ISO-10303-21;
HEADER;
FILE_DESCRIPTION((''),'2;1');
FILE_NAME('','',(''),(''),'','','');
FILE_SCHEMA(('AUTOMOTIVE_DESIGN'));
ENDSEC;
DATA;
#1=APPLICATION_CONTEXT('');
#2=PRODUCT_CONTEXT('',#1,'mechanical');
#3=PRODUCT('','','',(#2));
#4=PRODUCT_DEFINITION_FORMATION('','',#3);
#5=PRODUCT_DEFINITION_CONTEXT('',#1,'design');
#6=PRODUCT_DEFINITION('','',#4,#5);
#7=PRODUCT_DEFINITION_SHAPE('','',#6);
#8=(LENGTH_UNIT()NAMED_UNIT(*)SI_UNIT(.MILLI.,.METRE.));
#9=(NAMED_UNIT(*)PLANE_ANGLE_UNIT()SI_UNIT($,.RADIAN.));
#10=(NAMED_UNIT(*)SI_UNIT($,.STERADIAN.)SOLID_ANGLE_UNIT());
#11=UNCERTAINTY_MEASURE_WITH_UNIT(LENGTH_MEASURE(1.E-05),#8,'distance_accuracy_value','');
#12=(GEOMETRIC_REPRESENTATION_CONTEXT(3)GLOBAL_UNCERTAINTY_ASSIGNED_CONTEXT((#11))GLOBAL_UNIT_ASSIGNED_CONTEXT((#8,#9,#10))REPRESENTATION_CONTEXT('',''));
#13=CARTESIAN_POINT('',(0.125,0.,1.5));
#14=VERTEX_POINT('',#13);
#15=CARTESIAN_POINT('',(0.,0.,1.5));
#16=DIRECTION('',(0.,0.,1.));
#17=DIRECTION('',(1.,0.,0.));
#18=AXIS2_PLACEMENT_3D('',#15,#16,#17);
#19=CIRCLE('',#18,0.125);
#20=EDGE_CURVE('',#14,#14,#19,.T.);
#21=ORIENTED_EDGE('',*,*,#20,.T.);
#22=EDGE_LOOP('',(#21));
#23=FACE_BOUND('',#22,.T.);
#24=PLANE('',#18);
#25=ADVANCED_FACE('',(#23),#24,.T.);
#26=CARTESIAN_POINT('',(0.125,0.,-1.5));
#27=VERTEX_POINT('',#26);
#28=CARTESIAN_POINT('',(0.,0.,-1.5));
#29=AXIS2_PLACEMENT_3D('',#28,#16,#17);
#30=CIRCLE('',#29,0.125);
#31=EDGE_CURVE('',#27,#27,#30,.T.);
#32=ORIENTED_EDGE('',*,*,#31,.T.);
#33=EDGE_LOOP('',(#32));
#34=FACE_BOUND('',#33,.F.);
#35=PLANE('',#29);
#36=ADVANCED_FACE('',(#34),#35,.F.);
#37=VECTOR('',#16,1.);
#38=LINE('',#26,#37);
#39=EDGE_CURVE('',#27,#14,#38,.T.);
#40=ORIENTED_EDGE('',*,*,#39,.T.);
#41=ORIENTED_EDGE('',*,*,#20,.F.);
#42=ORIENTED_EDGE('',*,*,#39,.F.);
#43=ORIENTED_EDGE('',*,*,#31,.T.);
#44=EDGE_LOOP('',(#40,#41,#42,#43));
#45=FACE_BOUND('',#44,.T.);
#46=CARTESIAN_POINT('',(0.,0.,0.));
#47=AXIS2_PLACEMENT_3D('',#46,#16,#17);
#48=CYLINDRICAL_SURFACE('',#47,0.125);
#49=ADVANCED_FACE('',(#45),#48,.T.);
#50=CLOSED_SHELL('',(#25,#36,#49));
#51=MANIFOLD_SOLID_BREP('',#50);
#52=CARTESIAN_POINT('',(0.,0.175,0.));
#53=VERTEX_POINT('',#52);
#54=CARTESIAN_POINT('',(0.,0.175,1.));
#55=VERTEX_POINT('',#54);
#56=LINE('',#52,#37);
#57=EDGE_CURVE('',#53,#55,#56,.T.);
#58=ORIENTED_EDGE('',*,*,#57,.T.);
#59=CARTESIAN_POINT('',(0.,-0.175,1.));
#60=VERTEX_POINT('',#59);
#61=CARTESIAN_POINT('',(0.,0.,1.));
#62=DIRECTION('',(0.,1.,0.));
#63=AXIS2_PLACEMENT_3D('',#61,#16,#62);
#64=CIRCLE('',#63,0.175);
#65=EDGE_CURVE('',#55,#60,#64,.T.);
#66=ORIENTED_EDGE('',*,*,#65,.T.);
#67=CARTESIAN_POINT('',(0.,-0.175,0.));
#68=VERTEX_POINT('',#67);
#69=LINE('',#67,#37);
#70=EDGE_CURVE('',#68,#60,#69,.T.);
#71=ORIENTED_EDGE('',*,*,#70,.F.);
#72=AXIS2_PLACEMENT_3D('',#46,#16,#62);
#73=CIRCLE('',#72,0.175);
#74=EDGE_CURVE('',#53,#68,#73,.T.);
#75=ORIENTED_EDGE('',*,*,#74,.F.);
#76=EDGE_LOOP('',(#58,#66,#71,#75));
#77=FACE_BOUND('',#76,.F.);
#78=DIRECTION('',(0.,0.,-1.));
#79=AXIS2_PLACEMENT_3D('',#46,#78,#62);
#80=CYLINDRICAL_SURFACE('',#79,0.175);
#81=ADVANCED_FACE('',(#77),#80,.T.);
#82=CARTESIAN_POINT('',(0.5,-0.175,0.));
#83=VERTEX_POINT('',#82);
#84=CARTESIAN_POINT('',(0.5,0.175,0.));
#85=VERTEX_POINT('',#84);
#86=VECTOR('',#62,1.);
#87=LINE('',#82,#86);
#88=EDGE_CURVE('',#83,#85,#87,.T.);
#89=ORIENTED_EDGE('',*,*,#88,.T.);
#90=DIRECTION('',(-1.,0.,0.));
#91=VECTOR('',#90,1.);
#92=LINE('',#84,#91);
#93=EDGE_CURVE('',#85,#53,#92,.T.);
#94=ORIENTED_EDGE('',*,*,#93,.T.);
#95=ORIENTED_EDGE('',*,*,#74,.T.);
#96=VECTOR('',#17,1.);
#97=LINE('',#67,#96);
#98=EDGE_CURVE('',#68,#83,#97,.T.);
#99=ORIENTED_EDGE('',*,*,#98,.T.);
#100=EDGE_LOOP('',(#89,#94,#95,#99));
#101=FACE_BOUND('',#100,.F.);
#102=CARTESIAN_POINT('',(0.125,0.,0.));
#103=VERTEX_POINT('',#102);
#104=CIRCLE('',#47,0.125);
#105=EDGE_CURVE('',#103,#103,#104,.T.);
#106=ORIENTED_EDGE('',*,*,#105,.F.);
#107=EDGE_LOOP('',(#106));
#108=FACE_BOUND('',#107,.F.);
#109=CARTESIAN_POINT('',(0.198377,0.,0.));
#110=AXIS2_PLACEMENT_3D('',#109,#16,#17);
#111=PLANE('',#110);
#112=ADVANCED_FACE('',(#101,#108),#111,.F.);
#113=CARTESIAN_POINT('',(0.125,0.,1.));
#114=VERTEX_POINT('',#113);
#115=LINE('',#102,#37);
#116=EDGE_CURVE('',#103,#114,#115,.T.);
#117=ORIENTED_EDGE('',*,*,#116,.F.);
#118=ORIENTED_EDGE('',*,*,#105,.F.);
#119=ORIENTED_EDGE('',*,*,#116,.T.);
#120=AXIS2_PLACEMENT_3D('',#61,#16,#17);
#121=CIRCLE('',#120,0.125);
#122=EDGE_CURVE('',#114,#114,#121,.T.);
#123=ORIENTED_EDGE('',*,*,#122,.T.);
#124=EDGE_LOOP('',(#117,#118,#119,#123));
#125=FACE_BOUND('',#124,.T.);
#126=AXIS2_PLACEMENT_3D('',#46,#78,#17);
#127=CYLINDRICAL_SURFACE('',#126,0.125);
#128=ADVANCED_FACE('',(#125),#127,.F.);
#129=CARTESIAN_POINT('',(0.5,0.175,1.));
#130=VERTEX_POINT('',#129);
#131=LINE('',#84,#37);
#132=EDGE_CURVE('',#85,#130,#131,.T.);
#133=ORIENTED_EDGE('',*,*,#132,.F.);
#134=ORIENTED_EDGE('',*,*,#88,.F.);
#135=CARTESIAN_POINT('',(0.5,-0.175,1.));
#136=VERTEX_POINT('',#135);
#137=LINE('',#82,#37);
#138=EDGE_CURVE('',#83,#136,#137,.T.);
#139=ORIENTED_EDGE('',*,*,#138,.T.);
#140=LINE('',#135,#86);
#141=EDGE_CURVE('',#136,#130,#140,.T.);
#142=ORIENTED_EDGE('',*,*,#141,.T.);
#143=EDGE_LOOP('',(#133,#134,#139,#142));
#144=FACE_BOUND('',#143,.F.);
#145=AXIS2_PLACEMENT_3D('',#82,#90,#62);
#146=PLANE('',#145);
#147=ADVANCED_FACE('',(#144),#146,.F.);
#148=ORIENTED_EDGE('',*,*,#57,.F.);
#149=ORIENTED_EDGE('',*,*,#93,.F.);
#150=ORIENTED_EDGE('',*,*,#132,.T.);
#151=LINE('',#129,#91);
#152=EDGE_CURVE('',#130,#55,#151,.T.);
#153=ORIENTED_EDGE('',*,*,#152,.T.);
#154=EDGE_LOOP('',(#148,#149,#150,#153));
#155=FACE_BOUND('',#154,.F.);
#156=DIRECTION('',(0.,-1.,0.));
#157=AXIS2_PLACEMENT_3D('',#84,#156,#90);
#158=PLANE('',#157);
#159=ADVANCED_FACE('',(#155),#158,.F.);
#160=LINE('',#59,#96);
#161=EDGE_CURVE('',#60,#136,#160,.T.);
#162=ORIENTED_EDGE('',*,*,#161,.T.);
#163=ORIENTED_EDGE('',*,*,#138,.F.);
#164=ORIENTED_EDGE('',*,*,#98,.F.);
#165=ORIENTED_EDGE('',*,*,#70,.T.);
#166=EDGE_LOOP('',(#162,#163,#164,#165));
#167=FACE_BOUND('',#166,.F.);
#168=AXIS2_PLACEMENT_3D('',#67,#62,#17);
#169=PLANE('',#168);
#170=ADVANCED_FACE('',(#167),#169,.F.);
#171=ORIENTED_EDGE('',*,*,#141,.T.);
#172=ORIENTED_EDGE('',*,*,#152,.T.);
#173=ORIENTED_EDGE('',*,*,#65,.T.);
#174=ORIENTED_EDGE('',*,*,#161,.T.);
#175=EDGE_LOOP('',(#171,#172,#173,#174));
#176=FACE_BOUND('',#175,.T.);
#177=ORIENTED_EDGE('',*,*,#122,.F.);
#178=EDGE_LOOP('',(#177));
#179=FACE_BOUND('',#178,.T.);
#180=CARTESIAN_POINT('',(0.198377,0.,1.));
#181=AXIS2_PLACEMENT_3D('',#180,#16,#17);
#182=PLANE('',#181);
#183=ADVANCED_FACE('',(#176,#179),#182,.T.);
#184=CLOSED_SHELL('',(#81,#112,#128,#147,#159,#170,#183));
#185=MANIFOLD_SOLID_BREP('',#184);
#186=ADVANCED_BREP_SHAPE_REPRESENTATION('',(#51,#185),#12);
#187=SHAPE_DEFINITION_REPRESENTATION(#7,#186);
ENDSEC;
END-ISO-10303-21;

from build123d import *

# Parameters (mm, degrees)
F0_R     = 0.125
F1_DEPTH = 1
F2_DEPTH = 1.5


# Not quite as in the source:
# - ends of sketch curves that miss each other by under 0.0002 mm in the source are joined


with BuildPart() as f1:
    # F0 (on Top) → F1 (new body)
    with BuildSketch(Plane.XY):
        with BuildLine():
            Line((0.5, 0.175), (0, 0.175))
            ThreePointArc((0, 0.175), (-0.175, 0), (0, -0.175))
            Line((0, -0.175), (0.5, -0.175))
            Line((0.5, -0.175), (0.5, 0.175))
        make_face()
        Circle(F0_R, mode=Mode.SUBTRACT)
    extrude(amount=F1_DEPTH)


with BuildPart() as f2:
    # F0 (on Top) → F2 (new body, symmetric)
    with BuildSketch(Plane.XY):
        Circle(F0_R)
    extrude(amount=F2_DEPTH, both=True)


solid = Compound([f1.part, f2.part])
